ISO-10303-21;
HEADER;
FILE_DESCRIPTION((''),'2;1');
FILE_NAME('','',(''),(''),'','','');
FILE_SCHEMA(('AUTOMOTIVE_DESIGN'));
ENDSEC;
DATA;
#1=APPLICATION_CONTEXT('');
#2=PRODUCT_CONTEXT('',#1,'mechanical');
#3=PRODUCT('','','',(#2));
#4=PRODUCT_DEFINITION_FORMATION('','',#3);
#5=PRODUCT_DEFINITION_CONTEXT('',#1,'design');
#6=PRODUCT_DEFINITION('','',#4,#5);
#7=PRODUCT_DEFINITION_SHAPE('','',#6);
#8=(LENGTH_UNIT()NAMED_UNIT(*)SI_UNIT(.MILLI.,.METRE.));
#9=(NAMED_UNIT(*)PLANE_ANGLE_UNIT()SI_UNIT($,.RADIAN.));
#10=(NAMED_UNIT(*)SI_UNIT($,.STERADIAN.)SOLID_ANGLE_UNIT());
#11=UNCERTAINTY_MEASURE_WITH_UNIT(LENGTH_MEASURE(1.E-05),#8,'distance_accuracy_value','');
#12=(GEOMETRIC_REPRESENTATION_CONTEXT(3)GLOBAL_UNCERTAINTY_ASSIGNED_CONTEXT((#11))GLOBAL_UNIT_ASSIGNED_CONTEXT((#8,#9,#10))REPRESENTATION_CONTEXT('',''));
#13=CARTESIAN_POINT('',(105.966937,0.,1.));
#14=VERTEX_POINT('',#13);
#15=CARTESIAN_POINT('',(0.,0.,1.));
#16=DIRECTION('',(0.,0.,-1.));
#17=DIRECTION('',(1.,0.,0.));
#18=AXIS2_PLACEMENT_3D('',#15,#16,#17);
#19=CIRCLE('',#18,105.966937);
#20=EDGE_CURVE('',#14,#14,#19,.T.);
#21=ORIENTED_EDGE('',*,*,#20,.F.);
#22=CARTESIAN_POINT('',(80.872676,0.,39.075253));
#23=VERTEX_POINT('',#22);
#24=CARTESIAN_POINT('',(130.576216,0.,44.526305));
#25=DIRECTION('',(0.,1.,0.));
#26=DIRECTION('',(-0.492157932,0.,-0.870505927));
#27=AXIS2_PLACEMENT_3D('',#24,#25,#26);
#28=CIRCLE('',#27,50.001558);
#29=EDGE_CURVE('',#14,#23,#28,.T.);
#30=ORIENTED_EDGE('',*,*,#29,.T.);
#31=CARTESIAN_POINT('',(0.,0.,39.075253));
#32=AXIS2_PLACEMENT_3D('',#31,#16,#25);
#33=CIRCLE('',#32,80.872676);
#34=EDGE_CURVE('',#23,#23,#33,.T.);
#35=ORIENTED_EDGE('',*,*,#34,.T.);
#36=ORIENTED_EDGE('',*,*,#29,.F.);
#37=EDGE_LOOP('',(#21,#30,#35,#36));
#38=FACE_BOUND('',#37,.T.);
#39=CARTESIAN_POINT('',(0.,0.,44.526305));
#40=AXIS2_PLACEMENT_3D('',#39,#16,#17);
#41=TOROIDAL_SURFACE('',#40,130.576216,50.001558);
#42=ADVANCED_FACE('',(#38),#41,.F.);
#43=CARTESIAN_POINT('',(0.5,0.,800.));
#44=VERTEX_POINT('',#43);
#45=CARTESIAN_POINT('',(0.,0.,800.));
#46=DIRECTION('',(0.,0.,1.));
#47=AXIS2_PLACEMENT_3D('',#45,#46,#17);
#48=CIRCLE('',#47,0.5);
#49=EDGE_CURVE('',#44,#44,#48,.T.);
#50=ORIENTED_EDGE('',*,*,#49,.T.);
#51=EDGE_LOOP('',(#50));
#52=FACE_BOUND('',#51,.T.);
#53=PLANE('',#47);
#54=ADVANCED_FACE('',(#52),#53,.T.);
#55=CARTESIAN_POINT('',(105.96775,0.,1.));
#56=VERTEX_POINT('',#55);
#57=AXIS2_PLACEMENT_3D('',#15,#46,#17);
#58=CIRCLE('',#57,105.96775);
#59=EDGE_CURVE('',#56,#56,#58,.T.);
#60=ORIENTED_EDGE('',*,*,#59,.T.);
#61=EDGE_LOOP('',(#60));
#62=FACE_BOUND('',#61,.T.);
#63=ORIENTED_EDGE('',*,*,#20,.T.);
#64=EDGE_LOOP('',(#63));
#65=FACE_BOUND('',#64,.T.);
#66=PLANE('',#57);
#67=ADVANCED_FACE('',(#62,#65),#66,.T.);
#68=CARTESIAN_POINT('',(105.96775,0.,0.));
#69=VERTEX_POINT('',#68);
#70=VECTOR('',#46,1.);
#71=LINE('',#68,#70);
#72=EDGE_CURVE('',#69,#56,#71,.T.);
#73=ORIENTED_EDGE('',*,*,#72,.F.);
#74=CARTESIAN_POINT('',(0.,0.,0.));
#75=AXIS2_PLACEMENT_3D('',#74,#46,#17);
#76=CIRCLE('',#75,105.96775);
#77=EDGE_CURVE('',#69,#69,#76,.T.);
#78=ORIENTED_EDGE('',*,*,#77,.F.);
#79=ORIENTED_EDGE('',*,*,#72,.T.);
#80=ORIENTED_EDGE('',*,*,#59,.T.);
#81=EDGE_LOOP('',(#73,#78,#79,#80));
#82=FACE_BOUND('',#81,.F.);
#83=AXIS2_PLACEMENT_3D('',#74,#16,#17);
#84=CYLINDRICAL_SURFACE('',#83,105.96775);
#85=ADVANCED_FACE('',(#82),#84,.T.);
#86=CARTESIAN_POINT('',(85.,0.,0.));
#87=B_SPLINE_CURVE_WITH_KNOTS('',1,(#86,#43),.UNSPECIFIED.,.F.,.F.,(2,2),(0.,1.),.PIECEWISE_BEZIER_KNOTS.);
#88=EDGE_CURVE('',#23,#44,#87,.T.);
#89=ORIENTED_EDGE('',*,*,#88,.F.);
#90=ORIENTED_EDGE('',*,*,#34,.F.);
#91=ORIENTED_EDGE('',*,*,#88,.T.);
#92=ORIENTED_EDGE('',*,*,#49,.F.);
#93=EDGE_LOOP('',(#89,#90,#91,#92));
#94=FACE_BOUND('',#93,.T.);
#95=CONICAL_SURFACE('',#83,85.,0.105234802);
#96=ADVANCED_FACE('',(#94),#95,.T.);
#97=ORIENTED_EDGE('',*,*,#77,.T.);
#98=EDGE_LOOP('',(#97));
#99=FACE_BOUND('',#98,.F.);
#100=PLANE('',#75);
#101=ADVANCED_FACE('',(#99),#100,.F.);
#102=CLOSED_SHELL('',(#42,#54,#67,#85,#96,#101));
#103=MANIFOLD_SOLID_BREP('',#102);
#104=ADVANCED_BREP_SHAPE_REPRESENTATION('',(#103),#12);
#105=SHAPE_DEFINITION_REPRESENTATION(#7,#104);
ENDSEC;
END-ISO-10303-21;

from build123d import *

# Parameters (mm, degrees)
F0_R     = 85
F2_R     = 0.5
F4_R     = 105.9677495378
F5_DEPTH = 1


# Not quite as in the source:
# - a fillet or chamfer that OpenCascade refuses, or shapes differently, is made with other operations: its cross-section is extruded or revolved along the edge and cut away or added


with BuildPart() as f3:
    # F0 (on Top) → F3 section 0
    with BuildSketch(Plane.XY):
        Circle(F0_R)
    # F2 (on offset) → F3 section 1
    with BuildSketch(Plane.XY.offset(800)):
        Circle(F2_R)
    loft()

    # F4 (on Top) → F5 (join)
    with BuildSketch(Plane.XY):
        Circle(F4_R)
    extrude(amount=F5_DEPTH)

    # F6: fillet of radius 50 on 1 edges, made by hand


with BuildPart() as f6_tool2:
    # F6_s3 → F6_t4 (revolve)
    with BuildSketch(Plane.XZ):
        with BuildLine():
            ThreePointArc((105.9675526746, 0.9996517976), (88.7718520485, 17.0936422209), (80.851270192, 39.2741072932))
            Line((80.851270192, 39.2741072932), (75.8787755878, 38.7488875506))
            ThreePointArc((75.8787755878, 38.7488875506), (77.9005268853, 19.6118549121), (79.9218803957, 0.4747802574))
            Line((79.9218803957, 0.4747802574), (84.894375, -4.0001558343))
            ThreePointArc((84.894375, -4.0001558343), (95.4309638373, -4.0001558343), (103.5066863186, -3.3530134945))
            Line((103.5066863186, -3.3530134945), (105.9675526746, 0.9996517976))
        make_face()
    revolve(axis=Axis((0, 0, 1), (0, 0, 1)))

    split(bisect_by=Plane.XY, keep=Keep.TOP)


with BuildPart() as f3_1:
    add(f3.part)

    # F6_t1: union F6_tool2
    add(f6_tool2.part)


solid = f3_1.part
